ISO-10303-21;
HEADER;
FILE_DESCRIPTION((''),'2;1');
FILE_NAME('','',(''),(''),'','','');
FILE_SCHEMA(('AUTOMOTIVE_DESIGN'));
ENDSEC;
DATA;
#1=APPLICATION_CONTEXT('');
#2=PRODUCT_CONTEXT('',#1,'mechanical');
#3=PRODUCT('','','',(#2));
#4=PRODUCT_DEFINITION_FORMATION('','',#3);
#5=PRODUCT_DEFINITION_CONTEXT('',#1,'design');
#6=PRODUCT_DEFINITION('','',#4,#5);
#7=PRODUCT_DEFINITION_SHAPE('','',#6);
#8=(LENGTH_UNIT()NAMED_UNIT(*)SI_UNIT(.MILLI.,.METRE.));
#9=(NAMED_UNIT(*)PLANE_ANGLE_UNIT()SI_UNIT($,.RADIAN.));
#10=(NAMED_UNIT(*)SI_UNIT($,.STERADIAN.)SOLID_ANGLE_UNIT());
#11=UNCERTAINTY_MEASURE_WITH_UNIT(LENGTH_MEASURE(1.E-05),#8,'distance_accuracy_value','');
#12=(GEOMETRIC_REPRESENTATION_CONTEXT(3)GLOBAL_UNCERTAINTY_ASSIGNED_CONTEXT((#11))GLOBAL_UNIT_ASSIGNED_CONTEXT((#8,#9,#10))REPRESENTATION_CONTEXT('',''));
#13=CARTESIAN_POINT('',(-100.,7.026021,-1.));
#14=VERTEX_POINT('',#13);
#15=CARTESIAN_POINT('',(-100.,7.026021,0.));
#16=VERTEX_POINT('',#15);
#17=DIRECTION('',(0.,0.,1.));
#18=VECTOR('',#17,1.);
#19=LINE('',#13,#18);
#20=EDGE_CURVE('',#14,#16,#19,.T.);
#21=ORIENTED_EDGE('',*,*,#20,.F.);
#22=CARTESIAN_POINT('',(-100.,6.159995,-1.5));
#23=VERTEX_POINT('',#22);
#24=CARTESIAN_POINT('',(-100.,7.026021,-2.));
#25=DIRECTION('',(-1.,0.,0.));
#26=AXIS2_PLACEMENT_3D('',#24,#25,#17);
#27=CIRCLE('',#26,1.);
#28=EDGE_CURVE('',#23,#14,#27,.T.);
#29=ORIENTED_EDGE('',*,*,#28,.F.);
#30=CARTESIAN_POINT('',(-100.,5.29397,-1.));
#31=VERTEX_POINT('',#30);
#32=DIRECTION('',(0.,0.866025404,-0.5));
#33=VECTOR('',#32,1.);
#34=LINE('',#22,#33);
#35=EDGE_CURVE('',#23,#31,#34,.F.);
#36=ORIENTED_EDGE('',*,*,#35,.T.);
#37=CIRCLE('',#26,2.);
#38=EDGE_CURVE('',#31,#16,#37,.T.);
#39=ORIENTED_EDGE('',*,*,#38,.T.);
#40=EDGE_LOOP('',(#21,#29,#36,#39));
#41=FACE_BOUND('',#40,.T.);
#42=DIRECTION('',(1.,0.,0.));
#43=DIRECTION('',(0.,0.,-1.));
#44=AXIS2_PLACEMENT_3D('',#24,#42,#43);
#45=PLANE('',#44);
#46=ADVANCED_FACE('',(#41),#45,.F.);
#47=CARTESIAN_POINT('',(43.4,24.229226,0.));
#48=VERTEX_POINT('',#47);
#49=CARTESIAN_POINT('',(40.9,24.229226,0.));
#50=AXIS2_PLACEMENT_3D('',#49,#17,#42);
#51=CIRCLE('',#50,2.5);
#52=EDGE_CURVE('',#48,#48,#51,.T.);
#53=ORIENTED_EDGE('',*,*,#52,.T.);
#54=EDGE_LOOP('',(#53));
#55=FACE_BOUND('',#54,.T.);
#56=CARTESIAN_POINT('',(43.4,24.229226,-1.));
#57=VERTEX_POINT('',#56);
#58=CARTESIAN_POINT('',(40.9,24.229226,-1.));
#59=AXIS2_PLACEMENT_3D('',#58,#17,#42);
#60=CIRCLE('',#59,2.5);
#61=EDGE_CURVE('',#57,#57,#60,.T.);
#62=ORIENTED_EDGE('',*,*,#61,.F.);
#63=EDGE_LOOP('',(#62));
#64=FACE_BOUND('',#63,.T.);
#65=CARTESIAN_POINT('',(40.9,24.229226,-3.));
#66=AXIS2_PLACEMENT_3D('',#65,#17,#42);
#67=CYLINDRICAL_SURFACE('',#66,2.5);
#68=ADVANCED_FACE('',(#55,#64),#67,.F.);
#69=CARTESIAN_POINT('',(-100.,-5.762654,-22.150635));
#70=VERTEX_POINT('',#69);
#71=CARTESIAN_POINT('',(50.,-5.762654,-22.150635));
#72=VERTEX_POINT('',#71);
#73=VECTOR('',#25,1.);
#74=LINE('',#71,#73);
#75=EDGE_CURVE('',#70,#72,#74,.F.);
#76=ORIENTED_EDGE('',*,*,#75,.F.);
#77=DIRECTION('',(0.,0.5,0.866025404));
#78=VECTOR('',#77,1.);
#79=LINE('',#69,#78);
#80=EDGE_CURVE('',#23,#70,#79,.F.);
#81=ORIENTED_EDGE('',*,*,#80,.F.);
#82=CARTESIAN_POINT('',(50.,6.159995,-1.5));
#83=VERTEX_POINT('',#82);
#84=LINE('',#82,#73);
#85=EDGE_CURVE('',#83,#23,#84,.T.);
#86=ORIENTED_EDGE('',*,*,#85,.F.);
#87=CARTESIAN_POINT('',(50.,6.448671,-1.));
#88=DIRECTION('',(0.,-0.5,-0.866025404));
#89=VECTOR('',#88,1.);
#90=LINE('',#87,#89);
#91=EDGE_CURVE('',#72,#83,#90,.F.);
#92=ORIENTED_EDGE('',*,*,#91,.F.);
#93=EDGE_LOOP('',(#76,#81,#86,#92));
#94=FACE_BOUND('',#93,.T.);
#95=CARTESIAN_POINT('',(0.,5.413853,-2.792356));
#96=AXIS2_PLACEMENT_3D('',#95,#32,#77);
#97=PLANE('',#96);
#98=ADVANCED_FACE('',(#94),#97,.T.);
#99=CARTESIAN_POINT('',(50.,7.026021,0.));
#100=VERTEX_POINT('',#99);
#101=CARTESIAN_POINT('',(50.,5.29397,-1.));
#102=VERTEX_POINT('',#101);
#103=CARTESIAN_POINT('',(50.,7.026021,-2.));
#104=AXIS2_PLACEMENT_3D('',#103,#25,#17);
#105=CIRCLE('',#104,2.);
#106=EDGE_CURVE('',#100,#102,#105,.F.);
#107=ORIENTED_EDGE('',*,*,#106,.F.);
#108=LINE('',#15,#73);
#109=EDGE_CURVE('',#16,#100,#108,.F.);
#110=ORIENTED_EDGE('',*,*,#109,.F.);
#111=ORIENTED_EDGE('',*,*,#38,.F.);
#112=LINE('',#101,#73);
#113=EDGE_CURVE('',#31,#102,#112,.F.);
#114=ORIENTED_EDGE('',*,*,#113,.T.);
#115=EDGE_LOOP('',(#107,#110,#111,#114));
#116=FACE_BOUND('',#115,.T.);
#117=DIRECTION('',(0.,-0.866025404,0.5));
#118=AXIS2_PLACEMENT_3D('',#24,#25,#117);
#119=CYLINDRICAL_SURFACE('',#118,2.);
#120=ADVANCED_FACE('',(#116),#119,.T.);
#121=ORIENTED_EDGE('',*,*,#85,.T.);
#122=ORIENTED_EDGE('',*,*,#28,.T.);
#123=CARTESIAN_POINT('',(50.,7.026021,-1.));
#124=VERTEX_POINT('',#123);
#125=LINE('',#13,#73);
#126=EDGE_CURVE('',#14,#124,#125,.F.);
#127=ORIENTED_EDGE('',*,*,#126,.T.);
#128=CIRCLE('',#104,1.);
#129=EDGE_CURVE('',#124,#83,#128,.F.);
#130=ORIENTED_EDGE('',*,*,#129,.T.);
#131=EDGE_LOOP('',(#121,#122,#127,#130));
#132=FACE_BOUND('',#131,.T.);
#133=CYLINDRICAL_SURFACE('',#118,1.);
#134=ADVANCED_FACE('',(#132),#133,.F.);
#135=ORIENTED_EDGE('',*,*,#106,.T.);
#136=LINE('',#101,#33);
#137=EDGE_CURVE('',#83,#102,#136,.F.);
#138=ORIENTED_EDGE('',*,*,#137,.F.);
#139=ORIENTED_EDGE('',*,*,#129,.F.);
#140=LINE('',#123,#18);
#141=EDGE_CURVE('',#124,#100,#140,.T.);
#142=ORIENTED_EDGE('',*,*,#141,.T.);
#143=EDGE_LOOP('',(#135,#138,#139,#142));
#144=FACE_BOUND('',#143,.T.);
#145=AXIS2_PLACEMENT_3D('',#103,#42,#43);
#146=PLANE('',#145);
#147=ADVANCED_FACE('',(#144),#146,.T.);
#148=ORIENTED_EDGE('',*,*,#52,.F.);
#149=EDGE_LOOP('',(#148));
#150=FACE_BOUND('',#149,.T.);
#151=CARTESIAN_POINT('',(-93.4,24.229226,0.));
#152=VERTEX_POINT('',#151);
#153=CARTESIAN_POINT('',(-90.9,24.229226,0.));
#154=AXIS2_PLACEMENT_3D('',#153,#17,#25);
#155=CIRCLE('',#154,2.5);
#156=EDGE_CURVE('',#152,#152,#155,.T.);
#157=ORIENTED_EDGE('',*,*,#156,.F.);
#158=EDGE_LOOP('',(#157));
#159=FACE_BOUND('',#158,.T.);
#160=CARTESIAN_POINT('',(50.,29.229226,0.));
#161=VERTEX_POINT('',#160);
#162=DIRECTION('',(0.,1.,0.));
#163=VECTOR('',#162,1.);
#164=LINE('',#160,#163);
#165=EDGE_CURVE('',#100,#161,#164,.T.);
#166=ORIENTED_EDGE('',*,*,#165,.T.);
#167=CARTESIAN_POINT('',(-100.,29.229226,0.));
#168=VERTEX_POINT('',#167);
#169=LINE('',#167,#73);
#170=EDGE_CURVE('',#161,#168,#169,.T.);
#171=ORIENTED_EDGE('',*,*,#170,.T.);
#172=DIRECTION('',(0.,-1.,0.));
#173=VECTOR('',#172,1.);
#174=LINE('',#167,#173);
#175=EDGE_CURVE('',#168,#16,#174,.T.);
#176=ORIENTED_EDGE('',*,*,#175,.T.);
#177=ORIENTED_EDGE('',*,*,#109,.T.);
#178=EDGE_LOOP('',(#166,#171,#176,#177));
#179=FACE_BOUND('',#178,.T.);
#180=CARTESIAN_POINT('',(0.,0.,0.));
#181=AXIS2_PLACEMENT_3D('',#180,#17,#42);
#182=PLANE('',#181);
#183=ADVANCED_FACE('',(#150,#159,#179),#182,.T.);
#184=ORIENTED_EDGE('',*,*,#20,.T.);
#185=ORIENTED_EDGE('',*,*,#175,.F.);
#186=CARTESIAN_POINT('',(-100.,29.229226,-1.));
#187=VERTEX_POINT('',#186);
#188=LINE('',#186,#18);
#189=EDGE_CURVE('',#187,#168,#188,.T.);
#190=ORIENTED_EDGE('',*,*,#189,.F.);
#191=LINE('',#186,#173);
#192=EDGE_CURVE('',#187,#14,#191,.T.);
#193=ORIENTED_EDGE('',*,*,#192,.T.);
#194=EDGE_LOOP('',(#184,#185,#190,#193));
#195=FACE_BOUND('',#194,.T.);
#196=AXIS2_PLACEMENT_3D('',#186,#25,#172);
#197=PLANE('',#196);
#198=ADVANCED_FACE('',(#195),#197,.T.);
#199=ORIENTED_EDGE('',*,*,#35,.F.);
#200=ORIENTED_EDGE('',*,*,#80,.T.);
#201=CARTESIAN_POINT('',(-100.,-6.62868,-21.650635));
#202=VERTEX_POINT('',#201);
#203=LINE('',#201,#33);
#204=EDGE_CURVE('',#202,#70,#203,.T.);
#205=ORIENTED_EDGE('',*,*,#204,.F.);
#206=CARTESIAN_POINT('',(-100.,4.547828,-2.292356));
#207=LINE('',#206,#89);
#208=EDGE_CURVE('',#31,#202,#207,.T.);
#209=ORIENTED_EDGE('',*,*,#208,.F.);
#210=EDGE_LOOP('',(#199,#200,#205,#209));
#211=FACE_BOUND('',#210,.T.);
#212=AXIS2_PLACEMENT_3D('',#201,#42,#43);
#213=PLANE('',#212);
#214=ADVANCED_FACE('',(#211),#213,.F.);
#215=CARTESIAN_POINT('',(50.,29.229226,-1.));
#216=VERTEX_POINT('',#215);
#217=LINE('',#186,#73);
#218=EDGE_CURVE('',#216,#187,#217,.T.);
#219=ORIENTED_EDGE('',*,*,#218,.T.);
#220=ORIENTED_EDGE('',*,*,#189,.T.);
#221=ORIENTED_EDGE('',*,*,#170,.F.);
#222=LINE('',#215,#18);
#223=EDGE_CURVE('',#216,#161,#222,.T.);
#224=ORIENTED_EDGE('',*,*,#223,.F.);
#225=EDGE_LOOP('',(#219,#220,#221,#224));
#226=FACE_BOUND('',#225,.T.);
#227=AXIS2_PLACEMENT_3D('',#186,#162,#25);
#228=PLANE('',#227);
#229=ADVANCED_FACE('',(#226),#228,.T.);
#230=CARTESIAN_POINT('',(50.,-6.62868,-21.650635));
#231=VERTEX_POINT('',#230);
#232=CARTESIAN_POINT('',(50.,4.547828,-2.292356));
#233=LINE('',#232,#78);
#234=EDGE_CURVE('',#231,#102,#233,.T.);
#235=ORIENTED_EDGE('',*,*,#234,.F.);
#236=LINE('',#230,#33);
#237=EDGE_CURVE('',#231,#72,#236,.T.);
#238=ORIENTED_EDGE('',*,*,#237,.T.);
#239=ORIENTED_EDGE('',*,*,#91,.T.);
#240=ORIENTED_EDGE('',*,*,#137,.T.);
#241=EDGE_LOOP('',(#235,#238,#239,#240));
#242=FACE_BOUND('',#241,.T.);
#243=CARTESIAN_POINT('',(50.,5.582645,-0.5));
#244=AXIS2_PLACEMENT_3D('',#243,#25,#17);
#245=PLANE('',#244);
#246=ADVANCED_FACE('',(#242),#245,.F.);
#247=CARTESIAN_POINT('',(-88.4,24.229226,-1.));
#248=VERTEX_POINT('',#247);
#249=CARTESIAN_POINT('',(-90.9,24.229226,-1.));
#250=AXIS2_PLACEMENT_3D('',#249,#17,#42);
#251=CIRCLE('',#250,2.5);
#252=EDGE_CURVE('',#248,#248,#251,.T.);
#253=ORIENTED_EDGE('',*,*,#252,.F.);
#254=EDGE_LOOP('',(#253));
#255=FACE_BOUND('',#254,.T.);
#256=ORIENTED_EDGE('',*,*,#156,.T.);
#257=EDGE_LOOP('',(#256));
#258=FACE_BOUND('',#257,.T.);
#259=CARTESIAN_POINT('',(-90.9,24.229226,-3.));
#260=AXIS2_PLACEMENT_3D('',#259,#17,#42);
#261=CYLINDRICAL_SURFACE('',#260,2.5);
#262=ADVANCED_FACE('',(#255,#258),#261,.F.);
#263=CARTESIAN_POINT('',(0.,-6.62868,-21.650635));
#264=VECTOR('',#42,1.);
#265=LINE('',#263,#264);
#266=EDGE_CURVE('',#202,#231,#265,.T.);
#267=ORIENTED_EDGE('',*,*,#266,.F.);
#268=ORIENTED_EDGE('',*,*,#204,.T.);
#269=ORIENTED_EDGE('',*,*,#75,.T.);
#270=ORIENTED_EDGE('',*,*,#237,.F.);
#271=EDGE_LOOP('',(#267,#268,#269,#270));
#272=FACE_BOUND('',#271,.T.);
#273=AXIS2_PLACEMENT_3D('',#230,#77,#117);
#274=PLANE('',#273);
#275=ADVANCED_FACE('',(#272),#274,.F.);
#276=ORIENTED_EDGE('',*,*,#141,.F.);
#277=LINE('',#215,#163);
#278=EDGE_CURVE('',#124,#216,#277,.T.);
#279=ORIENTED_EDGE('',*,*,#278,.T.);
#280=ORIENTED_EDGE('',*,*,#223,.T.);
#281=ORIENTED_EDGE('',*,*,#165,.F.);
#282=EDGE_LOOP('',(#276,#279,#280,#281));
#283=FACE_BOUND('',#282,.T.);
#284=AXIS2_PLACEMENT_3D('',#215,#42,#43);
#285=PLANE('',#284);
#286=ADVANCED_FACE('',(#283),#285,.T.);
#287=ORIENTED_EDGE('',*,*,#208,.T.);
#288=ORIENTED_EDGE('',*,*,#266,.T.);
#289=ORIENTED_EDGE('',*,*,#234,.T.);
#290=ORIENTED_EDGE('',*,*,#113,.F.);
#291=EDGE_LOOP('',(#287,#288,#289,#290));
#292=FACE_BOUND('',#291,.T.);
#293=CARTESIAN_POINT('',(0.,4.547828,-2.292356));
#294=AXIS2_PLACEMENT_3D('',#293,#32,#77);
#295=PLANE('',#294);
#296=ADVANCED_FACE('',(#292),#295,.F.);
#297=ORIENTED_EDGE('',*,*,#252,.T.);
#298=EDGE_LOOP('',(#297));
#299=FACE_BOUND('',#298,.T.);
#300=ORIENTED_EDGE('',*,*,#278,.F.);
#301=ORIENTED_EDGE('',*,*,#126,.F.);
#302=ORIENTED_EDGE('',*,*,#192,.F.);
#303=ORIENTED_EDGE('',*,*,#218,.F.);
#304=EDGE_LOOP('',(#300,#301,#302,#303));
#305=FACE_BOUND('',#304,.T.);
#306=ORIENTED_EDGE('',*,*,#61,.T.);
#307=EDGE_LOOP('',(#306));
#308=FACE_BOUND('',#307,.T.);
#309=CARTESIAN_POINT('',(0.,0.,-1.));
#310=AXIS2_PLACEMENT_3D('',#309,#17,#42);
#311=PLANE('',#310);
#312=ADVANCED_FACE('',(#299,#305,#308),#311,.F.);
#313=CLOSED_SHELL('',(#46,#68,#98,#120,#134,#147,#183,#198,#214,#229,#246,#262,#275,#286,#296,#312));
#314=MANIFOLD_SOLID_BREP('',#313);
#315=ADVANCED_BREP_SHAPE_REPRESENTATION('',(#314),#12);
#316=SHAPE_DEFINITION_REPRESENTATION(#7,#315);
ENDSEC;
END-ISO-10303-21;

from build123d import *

# Parameters (mm, degrees)
SKETCH1_W            = 150
SKETCH1_H            = 23.35790613
BASE_FLANGE1_DEPTH   = 1
EDGE_FLANGE2_START   = -100
EDGE_FLANGE2_DEPTH   = 150
EDGE_FLANGE2_2_DEPTH = 150
SKETCH13_R           = 2.5
CUT_EXTRUDE1_DEPTH   = 3


# Read off the part's stored shape, not the designer's step: Edge-Flange2
# Sheet-metal steps are written as plain solids
with BuildPart() as part:
    # Sketch1 → Base-Flange1 (new body)
    with BuildSketch(Plane.XY):
        with Locations((-25, 17.550273337)):
            Rectangle(SKETCH1_W, SKETCH1_H)
    extrude(amount=-BASE_FLANGE1_DEPTH)

    # Edge-Flange2 outline → Edge-Flange2 (cut)
    with BuildSketch(Plane.YZ.offset(EDGE_FLANGE2_START)):
        with BuildLine():
            Line((5.871320272, 0), (5.871320272, -0.367006837))
            ThreePointArc((5.871320272, -0.367006837), (6.420209917, -0.093958772), (7.02602081, 0))
            Line((7.02602081, 0), (5.871320272, 0))
        make_face()
    extrude(amount=EDGE_FLANGE2_DEPTH, mode=Mode.SUBTRACT)

    # Edge-Flange2 2 outline → Edge-Flange2 2 (add)
    with BuildSketch(Plane.YZ.offset(EDGE_FLANGE2_START)):
        with BuildLine():
            ThreePointArc((5.871320272, -0.367006837), (5.548352573, -0.652225322), (5.293970003, -1))
            Line((5.293970003, -1), (-6.628679728, -21.650635095))
            Line((-6.628679728, -21.650635095), (-5.762654324, -22.150635095))
            Line((-5.762654324, -22.150635095), (6.159995406, -1.5))
            ThreePointArc((6.159995406, -1.5), (6.52602081, -1.133974596), (7.02602081, -1))
            Line((7.02602081, -1), (5.871320272, -1))
            Line((5.871320272, -1), (5.871320272, -0.367006837))
        make_face()
    extrude(amount=EDGE_FLANGE2_2_DEPTH)

    # Sketch13 → Cut-Extrude1 (cut)
    with BuildSketch(Plane.XY):
        with Locations((40.9, 24.229226402)):
            Circle(SKETCH13_R)
        with Locations((-90.9, 24.229226402)):
            Circle(SKETCH13_R)
    extrude(amount=-CUT_EXTRUDE1_DEPTH, mode=Mode.SUBTRACT)


solid = part.part
